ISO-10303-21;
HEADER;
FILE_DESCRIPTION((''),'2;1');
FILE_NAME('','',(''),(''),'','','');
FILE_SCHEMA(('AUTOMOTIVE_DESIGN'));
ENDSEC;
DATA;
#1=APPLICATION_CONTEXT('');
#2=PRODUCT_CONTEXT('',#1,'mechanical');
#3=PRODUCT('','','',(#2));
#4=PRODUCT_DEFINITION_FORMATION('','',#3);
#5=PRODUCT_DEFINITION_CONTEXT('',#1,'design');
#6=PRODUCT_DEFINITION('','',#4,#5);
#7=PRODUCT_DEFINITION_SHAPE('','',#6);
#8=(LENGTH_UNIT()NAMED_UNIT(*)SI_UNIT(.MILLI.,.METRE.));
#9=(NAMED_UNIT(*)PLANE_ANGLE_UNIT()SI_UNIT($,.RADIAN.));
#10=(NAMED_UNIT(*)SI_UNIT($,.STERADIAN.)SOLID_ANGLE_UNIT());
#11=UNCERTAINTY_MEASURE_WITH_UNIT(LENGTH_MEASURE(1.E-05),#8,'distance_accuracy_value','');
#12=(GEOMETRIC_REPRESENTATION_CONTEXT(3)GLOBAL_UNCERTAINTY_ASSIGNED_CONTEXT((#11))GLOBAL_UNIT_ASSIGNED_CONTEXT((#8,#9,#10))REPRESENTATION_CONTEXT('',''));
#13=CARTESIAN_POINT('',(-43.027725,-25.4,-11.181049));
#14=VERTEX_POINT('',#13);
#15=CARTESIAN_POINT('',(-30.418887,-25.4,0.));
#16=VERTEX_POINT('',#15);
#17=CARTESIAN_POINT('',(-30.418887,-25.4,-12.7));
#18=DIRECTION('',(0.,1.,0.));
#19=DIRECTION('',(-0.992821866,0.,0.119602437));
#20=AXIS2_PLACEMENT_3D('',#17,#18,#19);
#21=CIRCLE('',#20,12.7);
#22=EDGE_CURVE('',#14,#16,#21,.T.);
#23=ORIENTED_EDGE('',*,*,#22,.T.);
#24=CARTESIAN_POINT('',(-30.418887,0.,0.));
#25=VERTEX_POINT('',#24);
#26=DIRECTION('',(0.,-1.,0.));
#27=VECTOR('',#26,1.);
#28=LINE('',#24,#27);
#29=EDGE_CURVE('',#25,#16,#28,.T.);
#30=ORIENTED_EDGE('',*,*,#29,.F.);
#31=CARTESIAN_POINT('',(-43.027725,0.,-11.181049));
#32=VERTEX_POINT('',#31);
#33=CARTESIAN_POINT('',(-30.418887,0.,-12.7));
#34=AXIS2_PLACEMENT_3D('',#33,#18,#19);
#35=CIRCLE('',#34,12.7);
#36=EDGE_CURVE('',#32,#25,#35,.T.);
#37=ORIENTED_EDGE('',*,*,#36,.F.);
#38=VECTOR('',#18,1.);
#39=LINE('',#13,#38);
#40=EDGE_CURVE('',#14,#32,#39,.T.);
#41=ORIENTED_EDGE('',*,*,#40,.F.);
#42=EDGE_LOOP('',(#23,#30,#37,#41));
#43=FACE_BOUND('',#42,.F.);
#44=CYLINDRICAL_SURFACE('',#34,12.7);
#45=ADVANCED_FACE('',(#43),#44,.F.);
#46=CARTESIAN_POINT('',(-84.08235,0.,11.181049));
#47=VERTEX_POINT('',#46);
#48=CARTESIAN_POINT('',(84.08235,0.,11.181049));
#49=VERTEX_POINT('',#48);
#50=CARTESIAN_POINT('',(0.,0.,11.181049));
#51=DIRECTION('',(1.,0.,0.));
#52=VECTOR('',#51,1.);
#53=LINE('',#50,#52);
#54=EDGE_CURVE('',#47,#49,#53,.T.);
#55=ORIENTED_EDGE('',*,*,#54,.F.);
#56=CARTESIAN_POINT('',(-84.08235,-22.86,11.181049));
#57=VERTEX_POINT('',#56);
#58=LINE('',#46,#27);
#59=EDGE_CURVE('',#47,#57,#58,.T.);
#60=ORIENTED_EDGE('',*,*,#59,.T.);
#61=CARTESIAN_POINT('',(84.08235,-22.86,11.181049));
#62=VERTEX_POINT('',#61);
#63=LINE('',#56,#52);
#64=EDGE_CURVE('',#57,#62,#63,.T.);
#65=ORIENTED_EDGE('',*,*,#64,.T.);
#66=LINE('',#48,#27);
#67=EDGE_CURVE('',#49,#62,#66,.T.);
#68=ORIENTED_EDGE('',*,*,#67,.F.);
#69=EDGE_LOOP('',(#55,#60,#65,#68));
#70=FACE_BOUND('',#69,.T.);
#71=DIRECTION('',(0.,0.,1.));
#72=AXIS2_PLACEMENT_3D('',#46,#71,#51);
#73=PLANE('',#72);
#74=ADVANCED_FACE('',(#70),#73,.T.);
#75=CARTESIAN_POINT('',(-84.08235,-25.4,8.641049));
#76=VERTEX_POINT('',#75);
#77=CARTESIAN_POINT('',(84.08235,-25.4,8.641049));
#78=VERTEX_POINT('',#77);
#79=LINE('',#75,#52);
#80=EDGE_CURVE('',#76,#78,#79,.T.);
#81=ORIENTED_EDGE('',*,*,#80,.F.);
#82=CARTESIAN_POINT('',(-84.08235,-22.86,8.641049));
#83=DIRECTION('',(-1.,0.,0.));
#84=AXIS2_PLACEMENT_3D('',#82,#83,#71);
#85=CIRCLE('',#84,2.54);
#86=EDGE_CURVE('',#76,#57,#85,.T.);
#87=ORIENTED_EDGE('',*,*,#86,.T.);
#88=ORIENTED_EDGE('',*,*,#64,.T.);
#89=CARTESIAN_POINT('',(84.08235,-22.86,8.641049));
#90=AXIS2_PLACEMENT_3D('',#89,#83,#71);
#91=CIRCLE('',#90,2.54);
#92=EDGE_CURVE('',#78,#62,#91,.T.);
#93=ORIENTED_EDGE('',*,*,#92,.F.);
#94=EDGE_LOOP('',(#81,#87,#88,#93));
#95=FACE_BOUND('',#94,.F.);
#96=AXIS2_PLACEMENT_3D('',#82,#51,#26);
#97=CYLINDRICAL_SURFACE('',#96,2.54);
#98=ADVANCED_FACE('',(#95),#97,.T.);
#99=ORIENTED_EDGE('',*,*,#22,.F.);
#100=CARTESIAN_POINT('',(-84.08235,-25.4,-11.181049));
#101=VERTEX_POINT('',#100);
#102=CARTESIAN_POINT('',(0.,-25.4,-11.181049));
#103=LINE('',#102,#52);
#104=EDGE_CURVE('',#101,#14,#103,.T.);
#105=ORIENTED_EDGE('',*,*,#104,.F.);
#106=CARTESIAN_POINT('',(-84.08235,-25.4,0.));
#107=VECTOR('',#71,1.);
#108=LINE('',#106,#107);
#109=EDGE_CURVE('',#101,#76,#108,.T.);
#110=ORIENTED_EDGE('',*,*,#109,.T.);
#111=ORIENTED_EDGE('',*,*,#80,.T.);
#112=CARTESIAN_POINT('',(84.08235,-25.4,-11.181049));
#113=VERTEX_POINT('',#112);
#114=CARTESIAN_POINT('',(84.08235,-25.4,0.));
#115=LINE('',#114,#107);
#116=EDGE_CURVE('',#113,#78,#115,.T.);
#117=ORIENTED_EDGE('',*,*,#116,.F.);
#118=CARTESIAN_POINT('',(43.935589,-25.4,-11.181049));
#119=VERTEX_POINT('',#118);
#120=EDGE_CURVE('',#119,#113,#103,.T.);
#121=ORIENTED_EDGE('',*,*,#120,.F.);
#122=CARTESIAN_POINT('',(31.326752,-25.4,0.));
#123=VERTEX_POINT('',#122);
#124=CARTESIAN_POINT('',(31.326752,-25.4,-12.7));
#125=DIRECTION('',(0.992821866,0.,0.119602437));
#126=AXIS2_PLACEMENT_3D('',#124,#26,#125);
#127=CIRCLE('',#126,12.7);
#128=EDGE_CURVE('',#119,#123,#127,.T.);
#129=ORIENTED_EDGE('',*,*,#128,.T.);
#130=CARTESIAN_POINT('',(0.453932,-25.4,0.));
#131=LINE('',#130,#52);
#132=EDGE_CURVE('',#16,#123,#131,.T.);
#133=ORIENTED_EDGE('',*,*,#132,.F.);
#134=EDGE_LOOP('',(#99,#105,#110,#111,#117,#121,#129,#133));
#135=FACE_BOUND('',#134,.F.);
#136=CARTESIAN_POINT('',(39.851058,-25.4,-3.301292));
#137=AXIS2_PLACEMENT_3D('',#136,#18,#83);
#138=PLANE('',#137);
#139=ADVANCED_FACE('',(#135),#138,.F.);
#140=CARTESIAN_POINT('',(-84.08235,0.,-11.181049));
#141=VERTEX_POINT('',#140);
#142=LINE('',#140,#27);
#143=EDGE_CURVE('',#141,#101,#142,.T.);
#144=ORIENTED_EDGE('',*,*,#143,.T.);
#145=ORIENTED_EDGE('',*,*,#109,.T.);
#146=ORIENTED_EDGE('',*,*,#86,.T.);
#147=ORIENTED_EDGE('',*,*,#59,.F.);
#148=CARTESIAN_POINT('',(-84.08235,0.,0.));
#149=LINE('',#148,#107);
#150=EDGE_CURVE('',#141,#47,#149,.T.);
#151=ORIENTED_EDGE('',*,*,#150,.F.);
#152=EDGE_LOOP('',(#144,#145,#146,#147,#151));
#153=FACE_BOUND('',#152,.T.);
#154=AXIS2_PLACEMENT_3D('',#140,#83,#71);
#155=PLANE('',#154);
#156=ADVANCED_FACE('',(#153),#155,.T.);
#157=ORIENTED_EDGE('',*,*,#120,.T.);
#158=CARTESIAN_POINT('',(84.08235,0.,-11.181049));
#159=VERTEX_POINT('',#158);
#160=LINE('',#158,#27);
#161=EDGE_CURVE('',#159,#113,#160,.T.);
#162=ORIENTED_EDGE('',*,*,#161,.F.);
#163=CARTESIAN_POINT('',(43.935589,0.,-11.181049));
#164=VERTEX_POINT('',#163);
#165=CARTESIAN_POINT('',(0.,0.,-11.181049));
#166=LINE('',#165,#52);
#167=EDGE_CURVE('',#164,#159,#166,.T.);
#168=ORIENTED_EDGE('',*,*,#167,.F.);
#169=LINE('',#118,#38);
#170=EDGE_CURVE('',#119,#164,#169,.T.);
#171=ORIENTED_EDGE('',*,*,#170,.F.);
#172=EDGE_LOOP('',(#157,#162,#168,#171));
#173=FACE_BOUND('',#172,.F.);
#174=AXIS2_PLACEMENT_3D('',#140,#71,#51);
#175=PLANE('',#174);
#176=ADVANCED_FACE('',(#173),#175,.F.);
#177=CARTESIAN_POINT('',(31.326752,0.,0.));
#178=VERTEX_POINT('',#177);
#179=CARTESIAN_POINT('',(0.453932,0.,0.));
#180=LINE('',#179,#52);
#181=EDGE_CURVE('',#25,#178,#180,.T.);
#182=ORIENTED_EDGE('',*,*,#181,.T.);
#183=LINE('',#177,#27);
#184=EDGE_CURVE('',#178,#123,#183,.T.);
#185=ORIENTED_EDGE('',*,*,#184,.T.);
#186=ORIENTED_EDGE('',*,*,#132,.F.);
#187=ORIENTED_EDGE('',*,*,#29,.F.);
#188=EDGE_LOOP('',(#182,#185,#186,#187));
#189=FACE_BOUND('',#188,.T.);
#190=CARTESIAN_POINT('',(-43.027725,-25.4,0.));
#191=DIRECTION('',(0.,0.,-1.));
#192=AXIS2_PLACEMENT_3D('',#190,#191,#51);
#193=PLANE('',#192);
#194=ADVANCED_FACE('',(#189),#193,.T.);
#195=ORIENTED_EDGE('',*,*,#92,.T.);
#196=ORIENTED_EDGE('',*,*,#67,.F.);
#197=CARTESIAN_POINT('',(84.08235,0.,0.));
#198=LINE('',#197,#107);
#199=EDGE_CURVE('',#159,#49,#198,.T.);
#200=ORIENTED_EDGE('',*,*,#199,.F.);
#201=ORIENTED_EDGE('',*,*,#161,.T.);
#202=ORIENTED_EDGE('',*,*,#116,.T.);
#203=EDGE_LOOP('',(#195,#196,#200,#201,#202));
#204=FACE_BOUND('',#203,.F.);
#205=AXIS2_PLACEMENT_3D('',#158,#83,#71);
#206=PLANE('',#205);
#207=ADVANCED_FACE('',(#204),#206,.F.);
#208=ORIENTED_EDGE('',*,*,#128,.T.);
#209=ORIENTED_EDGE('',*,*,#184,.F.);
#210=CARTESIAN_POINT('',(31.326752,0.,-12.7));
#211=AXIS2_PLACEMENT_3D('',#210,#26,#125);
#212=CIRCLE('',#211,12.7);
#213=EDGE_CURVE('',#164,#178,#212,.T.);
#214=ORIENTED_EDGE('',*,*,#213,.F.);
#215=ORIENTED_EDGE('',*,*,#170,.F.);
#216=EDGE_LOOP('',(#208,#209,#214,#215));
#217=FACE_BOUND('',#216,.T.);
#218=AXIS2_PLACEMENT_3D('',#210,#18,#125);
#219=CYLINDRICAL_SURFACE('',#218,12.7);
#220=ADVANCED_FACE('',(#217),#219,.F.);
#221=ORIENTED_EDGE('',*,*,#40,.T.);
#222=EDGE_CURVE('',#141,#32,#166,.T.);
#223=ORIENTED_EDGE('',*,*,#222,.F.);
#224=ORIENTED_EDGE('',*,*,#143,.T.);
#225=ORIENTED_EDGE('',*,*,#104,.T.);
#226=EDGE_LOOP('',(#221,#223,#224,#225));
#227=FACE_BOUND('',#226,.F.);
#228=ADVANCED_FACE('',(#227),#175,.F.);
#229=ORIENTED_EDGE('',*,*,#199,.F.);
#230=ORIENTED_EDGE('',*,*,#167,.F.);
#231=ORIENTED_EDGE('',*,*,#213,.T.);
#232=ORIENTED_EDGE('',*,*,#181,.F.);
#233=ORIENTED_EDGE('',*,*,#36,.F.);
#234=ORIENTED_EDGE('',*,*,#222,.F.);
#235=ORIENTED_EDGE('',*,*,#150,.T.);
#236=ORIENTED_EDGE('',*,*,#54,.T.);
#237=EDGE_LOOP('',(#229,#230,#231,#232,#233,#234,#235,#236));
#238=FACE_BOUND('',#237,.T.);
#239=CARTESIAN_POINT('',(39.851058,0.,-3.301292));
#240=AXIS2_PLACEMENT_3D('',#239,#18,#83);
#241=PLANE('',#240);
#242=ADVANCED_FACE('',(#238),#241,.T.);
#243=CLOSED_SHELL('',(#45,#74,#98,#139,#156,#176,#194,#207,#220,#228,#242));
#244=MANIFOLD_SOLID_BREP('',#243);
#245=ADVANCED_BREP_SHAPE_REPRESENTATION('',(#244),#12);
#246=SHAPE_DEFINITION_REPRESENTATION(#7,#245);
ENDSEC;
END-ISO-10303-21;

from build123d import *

# Parameters (mm, degrees)
F0_W        = 168.1647002697
F0_H        = 22.3620980978
F1_DEPTH    = 25.4
F2_W        = 86.963314563
F2_H        = 11.1810490489
F3_DEPTH    = 25.4
F4_T1_DEPTH = 25.4
F5_T1_DEPTH = 25.4
F6_R        = 2.54


# Not quite as in the source:
# - a fillet or chamfer that OpenCascade refuses, or shapes differently, is made with other operations: its cross-section is extruded or revolved along the edge and cut away or added


with BuildPart() as f1:
    # F0 (on Front) → F1 (new body)
    with BuildSketch(Plane.XZ):
        Rectangle(F0_W, F0_H)
    extrude(amount=F1_DEPTH)

    # F2 (on face) → F3 (cut)
    with BuildSketch(Plane.XZ.offset(25.4)):
        with Locations((0.4539322108, -5.5905245245)):
            Rectangle(F2_W, F2_H)
    extrude(amount=-F3_DEPTH, mode=Mode.SUBTRACT)

    # F4: fillet of radius 12.7 on 1 edges, made by hand

    # F4_s2 → F4_t1 (join)
    with BuildSketch(Plane.XZ):
        with BuildLine():
            ThreePointArc((-43.0277250707, -11.1810490489), (-38.8450170607, -3.1978771562), (-30.4188873761, 0))
            Line((-30.4188873761, 0), (-43.0277250707, 0))
            Line((-43.0277250707, 0), (-43.0277250707, -11.1810490489))
        make_face()
    extrude(amount=F4_T1_DEPTH)

    # F5: fillet of radius 12.7 on 1 edges, made by hand

    # F5_s2 → F5_t1 (join)
    with BuildSketch(Plane.XZ):
        with BuildLine():
            ThreePointArc((43.9355894923, -11.1810490489), (39.7528814823, -3.1978771562), (31.3267517977, 0))
            Line((31.3267517977, 0), (43.9355894923, 0))
            Line((43.9355894923, 0), (43.9355894923, -11.1810490489))
        make_face()
    extrude(amount=F5_T1_DEPTH)

    # F6
    f6_edges = [f1.edges().sort_by_distance(p)[0] for p in [
        (0, -25.4, 11.181049),
    ]]
    fillet(f6_edges, radius=F6_R)


solid = f1.part
